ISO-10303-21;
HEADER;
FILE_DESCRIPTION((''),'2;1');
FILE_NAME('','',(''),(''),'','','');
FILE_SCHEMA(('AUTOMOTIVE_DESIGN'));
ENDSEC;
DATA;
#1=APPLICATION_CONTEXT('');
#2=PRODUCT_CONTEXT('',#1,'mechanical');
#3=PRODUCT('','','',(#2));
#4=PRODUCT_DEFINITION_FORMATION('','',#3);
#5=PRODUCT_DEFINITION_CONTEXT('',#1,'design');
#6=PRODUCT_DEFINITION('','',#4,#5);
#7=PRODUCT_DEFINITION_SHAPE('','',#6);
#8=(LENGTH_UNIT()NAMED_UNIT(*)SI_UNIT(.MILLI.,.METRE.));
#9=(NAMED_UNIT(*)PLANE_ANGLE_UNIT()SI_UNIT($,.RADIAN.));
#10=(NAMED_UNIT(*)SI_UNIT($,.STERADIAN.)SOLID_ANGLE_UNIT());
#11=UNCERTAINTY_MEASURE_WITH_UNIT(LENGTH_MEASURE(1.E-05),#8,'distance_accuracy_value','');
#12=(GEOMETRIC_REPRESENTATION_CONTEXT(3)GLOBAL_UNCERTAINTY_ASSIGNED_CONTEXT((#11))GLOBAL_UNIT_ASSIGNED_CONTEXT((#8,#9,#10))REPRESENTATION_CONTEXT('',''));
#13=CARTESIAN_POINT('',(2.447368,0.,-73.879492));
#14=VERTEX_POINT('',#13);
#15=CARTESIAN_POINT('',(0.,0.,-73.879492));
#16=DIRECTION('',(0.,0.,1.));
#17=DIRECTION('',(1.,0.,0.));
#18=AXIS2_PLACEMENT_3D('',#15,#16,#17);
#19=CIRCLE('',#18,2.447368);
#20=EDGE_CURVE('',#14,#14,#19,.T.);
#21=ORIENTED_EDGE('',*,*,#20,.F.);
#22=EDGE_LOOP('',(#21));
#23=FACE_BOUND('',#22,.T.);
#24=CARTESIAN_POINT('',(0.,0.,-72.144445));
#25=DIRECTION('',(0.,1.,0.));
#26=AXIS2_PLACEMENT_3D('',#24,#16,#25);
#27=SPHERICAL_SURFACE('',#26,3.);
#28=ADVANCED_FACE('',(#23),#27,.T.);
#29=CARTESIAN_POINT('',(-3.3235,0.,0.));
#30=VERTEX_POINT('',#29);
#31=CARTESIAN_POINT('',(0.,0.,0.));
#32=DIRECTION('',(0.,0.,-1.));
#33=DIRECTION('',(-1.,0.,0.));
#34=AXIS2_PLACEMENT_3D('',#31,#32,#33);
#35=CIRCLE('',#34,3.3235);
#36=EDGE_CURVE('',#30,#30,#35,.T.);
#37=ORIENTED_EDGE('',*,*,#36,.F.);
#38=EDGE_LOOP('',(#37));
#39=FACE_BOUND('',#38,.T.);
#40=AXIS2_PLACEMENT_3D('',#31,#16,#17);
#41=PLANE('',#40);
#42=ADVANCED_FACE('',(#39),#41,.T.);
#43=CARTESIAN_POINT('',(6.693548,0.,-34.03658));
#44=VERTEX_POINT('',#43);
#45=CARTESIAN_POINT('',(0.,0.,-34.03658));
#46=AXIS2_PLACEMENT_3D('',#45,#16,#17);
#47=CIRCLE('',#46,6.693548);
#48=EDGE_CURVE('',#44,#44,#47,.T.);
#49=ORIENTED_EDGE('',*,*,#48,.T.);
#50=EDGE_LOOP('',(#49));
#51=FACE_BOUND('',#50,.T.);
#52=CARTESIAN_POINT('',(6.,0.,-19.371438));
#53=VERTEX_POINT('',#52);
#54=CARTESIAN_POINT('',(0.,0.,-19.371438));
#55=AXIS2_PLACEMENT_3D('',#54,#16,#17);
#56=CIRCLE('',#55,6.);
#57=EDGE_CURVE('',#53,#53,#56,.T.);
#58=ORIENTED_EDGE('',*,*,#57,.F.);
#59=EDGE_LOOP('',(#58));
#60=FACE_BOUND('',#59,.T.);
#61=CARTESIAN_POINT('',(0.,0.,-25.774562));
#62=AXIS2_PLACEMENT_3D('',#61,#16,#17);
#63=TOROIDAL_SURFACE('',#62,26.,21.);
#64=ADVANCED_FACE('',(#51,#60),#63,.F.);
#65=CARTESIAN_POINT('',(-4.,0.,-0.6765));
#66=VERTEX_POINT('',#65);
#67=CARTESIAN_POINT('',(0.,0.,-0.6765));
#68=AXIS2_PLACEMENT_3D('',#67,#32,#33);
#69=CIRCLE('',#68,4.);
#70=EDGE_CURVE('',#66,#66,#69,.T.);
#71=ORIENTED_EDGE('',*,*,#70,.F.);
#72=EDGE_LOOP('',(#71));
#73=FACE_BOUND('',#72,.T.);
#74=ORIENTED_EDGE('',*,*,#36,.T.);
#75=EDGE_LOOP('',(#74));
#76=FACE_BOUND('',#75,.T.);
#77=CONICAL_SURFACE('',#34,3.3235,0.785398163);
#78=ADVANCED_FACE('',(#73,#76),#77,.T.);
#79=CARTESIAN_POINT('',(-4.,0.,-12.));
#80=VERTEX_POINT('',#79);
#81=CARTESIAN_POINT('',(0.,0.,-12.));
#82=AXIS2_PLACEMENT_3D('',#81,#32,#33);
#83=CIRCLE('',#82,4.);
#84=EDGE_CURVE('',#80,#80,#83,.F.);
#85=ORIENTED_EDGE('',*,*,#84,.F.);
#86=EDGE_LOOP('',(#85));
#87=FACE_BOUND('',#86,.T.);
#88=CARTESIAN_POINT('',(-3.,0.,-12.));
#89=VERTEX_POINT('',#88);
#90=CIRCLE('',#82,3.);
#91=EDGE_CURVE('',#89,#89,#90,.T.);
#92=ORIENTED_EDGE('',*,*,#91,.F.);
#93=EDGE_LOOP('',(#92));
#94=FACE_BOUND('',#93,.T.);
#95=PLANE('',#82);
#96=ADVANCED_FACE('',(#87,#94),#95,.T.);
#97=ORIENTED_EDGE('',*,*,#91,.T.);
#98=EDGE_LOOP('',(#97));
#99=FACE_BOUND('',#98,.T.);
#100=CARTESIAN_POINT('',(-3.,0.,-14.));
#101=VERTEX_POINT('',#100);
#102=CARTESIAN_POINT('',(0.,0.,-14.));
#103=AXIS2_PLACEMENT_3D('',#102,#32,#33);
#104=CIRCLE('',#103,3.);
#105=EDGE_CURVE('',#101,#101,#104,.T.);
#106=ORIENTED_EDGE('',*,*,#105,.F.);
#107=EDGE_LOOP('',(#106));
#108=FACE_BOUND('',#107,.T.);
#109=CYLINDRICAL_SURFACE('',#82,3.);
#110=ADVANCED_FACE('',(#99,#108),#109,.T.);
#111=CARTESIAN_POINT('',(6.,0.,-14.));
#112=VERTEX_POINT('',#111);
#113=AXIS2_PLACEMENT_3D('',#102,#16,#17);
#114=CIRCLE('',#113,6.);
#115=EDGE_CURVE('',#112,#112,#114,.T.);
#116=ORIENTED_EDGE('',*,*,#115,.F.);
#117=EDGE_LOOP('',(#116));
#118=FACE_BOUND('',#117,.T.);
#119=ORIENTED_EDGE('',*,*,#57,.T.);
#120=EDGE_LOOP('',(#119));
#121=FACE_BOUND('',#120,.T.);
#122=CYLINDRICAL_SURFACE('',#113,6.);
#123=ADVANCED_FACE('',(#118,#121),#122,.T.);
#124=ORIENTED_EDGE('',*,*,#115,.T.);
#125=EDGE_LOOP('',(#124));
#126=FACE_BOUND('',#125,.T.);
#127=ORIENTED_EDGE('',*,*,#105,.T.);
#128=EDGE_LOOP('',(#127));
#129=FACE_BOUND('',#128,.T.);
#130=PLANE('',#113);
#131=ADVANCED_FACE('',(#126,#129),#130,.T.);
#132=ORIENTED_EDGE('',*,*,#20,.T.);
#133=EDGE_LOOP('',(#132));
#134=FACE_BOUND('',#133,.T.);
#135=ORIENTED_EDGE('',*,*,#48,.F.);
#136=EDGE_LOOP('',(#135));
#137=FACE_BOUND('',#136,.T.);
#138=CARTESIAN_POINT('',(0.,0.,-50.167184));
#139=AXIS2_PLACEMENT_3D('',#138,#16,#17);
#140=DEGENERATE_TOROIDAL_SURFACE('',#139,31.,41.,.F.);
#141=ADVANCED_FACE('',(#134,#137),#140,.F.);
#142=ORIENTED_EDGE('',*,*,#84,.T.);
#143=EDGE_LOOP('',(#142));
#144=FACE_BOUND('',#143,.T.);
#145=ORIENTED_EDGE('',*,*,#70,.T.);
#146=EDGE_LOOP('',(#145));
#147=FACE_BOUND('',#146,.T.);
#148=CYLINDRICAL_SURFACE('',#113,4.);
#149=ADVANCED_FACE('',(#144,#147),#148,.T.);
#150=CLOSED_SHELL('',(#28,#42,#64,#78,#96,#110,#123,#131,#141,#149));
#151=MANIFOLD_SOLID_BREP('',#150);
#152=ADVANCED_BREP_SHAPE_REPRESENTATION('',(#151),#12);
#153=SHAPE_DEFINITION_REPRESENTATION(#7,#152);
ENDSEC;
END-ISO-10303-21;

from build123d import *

# Parameters (mm, degrees)
SKETCH_1_R          = 4
EXTRUDE_1_DEPTH     = 14
SKETCH_2_OUTSIDE_W  = 13.6
SKETCH_2_OUTSIDE_H  = 13.6
SKETCH_2_OUTSIDE_R  = 3
CUT_EXTRUDE_1_DEPTH = 2


# Read off the part's stored shape, not the designer's step: M8 机械螺纹 螺柱1
with BuildPart() as part:
    # 草图1 → 凸台-拉伸1 (new body)
    with BuildSketch(Plane.XY):
        Circle(SKETCH_1_R)
    extrude(amount=-EXTRUDE_1_DEPTH)

    # 草图2 outside → 切除-拉伸1 (cut)
    with BuildSketch(Plane(origin=(0, 0, -14), x_dir=(-1, 0, 0), z_dir=(0, 0, -1))):
        Rectangle(SKETCH_2_OUTSIDE_W, SKETCH_2_OUTSIDE_H)
        Circle(SKETCH_2_OUTSIDE_R, mode=Mode.SUBTRACT)
    extrude(amount=-CUT_EXTRUDE_1_DEPTH, mode=Mode.SUBTRACT)

    # M8 机械螺纹 螺柱1 outline → M8 机械螺纹 螺柱1 (revolve, cut)
    with BuildSketch(Plane.XZ):
        Polygon((4, 0), (3.3235, 0), (4, -0.6765), align=None)
    revolve(axis=Axis((0, 0, 0), (0, 0, 1)), mode=Mode.SUBTRACT)

    # 草图4 one side → 旋转1 (revolve)
    with BuildSketch(Plane(origin=(0, 0, 0), x_dir=(0, 0, -1), z_dir=(1, 0, 0))):
        with BuildLine():
            Line((14, 6), (14, 0))
            Line((14, 0), (75.144445246, 0))
            ThreePointArc((75.144445246, 0), (74.809510044, 1.377472185), (73.879492165, 2.447368421))
            ThreePointArc((73.879492165, 2.447368421), (54.51207399, 9.769129661), (34.036579508, 6.693548387))
            ThreePointArc((34.036579508, 6.693548387), (26.766592165, 5.023444587), (19.371438197, 6))
            Line((19.371438197, 6), (14, 6))
        make_face()
    revolve(axis=Axis((0, 0, -14), (0, 0, -1)))


solid = part.part
